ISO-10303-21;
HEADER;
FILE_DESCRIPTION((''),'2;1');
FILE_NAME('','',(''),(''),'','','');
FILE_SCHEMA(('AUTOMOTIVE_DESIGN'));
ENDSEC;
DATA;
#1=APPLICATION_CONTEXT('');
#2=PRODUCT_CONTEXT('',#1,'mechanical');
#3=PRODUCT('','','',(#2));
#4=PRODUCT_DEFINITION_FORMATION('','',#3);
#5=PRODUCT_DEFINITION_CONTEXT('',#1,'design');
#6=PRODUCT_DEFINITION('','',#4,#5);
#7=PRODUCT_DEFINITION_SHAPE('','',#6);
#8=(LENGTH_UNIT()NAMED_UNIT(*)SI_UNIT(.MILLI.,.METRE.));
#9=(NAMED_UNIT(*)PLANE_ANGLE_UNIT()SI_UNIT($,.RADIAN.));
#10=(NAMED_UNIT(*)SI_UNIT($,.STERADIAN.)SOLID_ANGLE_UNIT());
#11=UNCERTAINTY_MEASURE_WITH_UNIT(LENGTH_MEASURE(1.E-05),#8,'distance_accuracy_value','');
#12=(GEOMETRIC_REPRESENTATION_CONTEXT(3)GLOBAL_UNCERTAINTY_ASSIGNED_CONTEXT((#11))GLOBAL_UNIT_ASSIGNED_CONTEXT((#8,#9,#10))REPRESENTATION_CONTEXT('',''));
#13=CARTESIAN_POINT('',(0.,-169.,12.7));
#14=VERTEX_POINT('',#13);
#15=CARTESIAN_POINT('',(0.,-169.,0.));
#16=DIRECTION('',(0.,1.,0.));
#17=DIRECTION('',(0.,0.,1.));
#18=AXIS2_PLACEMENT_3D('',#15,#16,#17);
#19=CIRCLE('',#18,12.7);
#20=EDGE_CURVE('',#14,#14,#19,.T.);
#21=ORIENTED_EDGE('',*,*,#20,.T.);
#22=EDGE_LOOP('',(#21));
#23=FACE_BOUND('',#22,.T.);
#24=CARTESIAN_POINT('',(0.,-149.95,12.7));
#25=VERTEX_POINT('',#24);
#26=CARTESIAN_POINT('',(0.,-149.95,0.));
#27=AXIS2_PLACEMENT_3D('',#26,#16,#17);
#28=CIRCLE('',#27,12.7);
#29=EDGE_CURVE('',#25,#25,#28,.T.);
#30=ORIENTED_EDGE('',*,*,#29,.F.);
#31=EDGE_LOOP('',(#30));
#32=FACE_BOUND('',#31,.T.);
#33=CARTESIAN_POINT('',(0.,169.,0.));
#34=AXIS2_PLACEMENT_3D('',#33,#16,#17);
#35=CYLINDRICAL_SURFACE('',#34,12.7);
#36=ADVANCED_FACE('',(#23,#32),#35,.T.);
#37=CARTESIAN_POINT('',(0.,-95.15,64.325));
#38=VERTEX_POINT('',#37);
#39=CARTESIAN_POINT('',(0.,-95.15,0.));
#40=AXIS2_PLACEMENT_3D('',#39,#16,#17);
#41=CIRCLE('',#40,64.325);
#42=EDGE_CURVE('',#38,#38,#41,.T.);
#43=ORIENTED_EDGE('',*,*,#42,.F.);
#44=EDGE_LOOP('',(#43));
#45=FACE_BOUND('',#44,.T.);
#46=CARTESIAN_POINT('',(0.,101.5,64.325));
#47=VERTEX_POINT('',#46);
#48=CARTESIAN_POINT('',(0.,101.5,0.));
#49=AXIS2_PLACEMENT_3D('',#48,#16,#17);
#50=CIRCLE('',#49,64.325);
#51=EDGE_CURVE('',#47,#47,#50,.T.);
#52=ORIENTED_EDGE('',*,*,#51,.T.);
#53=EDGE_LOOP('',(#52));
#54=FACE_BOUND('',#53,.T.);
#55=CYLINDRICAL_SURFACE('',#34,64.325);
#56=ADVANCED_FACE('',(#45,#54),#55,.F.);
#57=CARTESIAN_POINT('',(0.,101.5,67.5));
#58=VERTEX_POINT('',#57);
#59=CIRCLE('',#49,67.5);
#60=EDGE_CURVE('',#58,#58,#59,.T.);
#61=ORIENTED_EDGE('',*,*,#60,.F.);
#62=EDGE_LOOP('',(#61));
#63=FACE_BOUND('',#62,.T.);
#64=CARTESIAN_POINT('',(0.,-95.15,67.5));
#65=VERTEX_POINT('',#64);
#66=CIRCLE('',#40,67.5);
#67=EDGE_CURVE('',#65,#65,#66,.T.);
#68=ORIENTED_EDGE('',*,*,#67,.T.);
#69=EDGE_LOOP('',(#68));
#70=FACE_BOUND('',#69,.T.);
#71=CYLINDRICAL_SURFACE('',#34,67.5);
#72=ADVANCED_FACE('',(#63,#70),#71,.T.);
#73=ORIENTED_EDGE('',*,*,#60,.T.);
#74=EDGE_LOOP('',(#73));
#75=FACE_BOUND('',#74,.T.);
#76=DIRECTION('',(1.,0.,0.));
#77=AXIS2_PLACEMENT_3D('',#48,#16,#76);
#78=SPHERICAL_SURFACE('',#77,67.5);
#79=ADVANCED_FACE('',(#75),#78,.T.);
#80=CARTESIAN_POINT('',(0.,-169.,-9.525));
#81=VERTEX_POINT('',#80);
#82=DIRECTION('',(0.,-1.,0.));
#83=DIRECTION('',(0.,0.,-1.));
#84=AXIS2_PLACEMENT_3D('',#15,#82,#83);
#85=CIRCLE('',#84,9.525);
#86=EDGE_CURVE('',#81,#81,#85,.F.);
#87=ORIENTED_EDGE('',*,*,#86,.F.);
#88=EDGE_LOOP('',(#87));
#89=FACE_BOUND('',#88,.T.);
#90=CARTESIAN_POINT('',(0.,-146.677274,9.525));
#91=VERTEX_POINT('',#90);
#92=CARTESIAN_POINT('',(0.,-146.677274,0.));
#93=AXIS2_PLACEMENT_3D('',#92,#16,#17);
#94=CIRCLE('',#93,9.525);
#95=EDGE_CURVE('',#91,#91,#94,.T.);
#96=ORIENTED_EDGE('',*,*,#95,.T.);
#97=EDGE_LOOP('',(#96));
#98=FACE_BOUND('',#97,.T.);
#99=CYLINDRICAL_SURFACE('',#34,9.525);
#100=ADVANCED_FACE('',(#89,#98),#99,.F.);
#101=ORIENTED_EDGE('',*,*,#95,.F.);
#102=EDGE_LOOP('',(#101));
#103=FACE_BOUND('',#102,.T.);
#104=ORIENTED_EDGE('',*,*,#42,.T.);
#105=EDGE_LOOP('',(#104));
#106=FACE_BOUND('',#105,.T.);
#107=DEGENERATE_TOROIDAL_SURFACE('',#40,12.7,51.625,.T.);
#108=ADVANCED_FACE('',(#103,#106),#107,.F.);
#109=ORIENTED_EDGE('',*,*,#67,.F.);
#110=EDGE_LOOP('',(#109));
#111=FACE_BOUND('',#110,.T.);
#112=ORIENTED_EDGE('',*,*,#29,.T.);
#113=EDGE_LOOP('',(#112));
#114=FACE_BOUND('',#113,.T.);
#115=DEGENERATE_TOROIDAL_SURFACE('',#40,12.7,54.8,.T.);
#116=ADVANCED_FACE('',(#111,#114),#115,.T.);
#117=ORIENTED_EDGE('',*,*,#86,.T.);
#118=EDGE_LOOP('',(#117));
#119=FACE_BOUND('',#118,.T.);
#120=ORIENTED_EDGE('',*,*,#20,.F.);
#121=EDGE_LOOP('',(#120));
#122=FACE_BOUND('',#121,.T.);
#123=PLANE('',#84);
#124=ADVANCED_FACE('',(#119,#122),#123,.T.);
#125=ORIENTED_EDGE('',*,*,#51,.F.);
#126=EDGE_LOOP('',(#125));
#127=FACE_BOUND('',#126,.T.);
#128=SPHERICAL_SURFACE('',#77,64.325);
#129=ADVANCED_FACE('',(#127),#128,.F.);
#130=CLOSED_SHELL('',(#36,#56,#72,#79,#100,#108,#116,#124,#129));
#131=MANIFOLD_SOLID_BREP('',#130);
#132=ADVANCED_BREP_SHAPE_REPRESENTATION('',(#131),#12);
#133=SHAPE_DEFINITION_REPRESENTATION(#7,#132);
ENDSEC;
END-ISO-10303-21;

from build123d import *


# Read off the part's stored shape, not the designer's step: Shell1
with BuildPart() as part:
    # Sketch1 → Revolve1 (revolve)
    with BuildSketch(Plane.XY, mode=Mode.PRIVATE) as revolve1_sk:
        with BuildLine():
            Line((0, 169), (0, -169))
            Line((0, -169), (-12.7, -169))
            Line((-12.7, -169), (-12.7, -149.95))
            ThreePointArc((-12.7, -149.95), (-51.449451609, -133.899451609), (-67.5, -95.15))
            Line((-67.5, -95.15), (-67.5, 101.5))
            ThreePointArc((-67.5, 101.5), (-47.72970773, 149.22970773), (0, 169))
        make_face()
    revolve(revolve1_sk.sketch.rotate(Axis((0, 169, 0), (0, -1, 0)), 270), axis=Axis((0, 169, 0), (0, -1, 0)))

    # Shell1 outline → Shell1 (revolve, cut)
    with BuildSketch(Plane.XY):
        with BuildLine():
            Line((64.325, -95.15), (64.325, 101.499999979))
            ThreePointArc((64.325, 101.499999979), (45.484643708, 146.984643692), (0, 165.825))
            Line((0, 165.825), (0, -169))
            Line((0, -169), (9.525, -169))
            Line((9.525, -169), (9.525, -146.677274331))
            ThreePointArc((9.525, -146.677274331), (48.06404424, -132.760171497), (64.325, -95.15))
        make_face()
    revolve(axis=Axis((0, 0, 0), (0, 1, 0)), mode=Mode.SUBTRACT)


solid = part.part
